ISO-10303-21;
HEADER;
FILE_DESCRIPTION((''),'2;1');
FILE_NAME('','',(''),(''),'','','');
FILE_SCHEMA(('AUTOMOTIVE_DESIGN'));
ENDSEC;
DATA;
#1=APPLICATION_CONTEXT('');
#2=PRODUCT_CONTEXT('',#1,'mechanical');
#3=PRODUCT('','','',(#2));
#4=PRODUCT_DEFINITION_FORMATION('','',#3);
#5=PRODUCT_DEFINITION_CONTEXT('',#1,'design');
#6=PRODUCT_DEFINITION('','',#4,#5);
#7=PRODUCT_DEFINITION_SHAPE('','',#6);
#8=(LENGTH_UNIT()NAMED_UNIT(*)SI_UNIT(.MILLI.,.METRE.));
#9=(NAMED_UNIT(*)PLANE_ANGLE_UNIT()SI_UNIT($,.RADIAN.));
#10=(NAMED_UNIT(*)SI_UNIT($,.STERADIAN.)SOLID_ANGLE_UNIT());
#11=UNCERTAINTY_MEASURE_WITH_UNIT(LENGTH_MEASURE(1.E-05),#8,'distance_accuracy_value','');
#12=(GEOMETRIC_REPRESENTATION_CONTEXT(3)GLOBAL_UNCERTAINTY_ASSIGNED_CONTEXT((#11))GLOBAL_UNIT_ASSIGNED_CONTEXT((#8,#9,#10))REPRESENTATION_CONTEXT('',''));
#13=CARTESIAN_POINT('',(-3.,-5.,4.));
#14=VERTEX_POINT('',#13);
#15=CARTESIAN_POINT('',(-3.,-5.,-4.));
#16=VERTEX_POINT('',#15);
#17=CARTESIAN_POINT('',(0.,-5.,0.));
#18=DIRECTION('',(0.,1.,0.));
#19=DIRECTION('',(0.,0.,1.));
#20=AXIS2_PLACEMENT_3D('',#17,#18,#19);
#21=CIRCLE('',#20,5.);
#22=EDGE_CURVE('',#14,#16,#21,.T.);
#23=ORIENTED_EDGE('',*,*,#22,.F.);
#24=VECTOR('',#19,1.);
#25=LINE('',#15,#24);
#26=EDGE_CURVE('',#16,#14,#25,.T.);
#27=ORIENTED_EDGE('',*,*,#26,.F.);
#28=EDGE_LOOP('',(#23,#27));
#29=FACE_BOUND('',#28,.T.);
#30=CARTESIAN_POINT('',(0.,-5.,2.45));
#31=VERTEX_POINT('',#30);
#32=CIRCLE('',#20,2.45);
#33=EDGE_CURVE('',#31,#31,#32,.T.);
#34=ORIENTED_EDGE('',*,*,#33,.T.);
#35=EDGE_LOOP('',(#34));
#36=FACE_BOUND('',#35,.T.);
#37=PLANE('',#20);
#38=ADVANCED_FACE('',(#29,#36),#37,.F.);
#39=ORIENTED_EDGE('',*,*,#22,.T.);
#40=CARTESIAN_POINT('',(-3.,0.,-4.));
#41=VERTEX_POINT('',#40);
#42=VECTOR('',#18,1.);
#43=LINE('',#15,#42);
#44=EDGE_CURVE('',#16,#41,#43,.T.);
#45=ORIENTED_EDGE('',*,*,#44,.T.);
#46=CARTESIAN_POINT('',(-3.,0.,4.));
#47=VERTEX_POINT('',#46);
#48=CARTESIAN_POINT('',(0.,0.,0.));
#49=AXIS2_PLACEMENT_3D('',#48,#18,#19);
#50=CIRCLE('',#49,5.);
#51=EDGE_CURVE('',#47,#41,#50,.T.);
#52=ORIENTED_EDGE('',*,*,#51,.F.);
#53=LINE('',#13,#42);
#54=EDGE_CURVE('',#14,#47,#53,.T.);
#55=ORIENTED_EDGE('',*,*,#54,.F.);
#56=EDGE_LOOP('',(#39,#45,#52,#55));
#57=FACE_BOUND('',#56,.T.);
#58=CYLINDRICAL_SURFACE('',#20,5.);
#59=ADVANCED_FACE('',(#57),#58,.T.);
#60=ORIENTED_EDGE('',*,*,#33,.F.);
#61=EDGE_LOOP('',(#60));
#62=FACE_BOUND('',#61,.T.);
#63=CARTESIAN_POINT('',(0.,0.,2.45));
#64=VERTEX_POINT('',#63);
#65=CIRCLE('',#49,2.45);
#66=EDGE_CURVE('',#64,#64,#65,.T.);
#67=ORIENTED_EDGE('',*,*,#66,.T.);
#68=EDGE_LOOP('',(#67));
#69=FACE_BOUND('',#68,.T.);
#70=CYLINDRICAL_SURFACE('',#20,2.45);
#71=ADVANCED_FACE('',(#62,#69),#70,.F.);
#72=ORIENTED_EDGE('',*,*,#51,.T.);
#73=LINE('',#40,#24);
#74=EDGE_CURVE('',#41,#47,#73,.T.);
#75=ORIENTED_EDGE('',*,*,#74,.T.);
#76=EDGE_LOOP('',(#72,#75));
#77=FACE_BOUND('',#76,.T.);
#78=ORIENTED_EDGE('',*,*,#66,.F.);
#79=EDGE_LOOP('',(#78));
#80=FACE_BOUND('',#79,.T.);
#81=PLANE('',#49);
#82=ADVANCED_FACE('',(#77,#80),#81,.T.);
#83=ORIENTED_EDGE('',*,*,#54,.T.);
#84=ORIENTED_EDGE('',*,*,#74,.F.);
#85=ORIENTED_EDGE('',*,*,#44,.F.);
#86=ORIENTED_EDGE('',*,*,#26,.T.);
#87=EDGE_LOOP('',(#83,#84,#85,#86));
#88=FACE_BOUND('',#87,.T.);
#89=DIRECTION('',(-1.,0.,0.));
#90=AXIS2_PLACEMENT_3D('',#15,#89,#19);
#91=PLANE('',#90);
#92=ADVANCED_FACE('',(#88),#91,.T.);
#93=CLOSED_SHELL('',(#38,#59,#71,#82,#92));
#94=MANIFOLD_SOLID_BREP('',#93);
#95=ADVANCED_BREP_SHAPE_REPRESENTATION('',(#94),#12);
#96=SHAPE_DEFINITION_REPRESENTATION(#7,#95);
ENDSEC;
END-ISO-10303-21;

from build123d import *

# Parameters (mm, degrees)
BASE_FLANGE1_DEPTH = 5
SKETCH7_R          = 2.45
CUT_EXTRUDE1_DEPTH = 9.660254038


# Sheet-metal steps are written as plain solids
with BuildPart() as part:
    # Sketch1 → Base-Flange1 (new body)
    with BuildSketch(Plane(origin=(0, 0, 0), x_dir=(1, 0, 0), z_dir=(0, 1, 0))):
        with BuildLine():
            Line((-3, 4), (-3, -4))
            ThreePointArc((-3, -4), (5, 0), (-3, 4))
        make_face()
    extrude(amount=-BASE_FLANGE1_DEPTH)

    # Sketch7 → Cut-Extrude1 (cut, through all)
    with BuildSketch(Plane(origin=(0, 0, 0), x_dir=(1, 0, 0), z_dir=(0, 1, 0))):
        with Locations(Location((0, 0, 0), (0, 0, 270))):
            Circle(SKETCH7_R)
    extrude(amount=-CUT_EXTRUDE1_DEPTH, mode=Mode.SUBTRACT)


solid = part.part
